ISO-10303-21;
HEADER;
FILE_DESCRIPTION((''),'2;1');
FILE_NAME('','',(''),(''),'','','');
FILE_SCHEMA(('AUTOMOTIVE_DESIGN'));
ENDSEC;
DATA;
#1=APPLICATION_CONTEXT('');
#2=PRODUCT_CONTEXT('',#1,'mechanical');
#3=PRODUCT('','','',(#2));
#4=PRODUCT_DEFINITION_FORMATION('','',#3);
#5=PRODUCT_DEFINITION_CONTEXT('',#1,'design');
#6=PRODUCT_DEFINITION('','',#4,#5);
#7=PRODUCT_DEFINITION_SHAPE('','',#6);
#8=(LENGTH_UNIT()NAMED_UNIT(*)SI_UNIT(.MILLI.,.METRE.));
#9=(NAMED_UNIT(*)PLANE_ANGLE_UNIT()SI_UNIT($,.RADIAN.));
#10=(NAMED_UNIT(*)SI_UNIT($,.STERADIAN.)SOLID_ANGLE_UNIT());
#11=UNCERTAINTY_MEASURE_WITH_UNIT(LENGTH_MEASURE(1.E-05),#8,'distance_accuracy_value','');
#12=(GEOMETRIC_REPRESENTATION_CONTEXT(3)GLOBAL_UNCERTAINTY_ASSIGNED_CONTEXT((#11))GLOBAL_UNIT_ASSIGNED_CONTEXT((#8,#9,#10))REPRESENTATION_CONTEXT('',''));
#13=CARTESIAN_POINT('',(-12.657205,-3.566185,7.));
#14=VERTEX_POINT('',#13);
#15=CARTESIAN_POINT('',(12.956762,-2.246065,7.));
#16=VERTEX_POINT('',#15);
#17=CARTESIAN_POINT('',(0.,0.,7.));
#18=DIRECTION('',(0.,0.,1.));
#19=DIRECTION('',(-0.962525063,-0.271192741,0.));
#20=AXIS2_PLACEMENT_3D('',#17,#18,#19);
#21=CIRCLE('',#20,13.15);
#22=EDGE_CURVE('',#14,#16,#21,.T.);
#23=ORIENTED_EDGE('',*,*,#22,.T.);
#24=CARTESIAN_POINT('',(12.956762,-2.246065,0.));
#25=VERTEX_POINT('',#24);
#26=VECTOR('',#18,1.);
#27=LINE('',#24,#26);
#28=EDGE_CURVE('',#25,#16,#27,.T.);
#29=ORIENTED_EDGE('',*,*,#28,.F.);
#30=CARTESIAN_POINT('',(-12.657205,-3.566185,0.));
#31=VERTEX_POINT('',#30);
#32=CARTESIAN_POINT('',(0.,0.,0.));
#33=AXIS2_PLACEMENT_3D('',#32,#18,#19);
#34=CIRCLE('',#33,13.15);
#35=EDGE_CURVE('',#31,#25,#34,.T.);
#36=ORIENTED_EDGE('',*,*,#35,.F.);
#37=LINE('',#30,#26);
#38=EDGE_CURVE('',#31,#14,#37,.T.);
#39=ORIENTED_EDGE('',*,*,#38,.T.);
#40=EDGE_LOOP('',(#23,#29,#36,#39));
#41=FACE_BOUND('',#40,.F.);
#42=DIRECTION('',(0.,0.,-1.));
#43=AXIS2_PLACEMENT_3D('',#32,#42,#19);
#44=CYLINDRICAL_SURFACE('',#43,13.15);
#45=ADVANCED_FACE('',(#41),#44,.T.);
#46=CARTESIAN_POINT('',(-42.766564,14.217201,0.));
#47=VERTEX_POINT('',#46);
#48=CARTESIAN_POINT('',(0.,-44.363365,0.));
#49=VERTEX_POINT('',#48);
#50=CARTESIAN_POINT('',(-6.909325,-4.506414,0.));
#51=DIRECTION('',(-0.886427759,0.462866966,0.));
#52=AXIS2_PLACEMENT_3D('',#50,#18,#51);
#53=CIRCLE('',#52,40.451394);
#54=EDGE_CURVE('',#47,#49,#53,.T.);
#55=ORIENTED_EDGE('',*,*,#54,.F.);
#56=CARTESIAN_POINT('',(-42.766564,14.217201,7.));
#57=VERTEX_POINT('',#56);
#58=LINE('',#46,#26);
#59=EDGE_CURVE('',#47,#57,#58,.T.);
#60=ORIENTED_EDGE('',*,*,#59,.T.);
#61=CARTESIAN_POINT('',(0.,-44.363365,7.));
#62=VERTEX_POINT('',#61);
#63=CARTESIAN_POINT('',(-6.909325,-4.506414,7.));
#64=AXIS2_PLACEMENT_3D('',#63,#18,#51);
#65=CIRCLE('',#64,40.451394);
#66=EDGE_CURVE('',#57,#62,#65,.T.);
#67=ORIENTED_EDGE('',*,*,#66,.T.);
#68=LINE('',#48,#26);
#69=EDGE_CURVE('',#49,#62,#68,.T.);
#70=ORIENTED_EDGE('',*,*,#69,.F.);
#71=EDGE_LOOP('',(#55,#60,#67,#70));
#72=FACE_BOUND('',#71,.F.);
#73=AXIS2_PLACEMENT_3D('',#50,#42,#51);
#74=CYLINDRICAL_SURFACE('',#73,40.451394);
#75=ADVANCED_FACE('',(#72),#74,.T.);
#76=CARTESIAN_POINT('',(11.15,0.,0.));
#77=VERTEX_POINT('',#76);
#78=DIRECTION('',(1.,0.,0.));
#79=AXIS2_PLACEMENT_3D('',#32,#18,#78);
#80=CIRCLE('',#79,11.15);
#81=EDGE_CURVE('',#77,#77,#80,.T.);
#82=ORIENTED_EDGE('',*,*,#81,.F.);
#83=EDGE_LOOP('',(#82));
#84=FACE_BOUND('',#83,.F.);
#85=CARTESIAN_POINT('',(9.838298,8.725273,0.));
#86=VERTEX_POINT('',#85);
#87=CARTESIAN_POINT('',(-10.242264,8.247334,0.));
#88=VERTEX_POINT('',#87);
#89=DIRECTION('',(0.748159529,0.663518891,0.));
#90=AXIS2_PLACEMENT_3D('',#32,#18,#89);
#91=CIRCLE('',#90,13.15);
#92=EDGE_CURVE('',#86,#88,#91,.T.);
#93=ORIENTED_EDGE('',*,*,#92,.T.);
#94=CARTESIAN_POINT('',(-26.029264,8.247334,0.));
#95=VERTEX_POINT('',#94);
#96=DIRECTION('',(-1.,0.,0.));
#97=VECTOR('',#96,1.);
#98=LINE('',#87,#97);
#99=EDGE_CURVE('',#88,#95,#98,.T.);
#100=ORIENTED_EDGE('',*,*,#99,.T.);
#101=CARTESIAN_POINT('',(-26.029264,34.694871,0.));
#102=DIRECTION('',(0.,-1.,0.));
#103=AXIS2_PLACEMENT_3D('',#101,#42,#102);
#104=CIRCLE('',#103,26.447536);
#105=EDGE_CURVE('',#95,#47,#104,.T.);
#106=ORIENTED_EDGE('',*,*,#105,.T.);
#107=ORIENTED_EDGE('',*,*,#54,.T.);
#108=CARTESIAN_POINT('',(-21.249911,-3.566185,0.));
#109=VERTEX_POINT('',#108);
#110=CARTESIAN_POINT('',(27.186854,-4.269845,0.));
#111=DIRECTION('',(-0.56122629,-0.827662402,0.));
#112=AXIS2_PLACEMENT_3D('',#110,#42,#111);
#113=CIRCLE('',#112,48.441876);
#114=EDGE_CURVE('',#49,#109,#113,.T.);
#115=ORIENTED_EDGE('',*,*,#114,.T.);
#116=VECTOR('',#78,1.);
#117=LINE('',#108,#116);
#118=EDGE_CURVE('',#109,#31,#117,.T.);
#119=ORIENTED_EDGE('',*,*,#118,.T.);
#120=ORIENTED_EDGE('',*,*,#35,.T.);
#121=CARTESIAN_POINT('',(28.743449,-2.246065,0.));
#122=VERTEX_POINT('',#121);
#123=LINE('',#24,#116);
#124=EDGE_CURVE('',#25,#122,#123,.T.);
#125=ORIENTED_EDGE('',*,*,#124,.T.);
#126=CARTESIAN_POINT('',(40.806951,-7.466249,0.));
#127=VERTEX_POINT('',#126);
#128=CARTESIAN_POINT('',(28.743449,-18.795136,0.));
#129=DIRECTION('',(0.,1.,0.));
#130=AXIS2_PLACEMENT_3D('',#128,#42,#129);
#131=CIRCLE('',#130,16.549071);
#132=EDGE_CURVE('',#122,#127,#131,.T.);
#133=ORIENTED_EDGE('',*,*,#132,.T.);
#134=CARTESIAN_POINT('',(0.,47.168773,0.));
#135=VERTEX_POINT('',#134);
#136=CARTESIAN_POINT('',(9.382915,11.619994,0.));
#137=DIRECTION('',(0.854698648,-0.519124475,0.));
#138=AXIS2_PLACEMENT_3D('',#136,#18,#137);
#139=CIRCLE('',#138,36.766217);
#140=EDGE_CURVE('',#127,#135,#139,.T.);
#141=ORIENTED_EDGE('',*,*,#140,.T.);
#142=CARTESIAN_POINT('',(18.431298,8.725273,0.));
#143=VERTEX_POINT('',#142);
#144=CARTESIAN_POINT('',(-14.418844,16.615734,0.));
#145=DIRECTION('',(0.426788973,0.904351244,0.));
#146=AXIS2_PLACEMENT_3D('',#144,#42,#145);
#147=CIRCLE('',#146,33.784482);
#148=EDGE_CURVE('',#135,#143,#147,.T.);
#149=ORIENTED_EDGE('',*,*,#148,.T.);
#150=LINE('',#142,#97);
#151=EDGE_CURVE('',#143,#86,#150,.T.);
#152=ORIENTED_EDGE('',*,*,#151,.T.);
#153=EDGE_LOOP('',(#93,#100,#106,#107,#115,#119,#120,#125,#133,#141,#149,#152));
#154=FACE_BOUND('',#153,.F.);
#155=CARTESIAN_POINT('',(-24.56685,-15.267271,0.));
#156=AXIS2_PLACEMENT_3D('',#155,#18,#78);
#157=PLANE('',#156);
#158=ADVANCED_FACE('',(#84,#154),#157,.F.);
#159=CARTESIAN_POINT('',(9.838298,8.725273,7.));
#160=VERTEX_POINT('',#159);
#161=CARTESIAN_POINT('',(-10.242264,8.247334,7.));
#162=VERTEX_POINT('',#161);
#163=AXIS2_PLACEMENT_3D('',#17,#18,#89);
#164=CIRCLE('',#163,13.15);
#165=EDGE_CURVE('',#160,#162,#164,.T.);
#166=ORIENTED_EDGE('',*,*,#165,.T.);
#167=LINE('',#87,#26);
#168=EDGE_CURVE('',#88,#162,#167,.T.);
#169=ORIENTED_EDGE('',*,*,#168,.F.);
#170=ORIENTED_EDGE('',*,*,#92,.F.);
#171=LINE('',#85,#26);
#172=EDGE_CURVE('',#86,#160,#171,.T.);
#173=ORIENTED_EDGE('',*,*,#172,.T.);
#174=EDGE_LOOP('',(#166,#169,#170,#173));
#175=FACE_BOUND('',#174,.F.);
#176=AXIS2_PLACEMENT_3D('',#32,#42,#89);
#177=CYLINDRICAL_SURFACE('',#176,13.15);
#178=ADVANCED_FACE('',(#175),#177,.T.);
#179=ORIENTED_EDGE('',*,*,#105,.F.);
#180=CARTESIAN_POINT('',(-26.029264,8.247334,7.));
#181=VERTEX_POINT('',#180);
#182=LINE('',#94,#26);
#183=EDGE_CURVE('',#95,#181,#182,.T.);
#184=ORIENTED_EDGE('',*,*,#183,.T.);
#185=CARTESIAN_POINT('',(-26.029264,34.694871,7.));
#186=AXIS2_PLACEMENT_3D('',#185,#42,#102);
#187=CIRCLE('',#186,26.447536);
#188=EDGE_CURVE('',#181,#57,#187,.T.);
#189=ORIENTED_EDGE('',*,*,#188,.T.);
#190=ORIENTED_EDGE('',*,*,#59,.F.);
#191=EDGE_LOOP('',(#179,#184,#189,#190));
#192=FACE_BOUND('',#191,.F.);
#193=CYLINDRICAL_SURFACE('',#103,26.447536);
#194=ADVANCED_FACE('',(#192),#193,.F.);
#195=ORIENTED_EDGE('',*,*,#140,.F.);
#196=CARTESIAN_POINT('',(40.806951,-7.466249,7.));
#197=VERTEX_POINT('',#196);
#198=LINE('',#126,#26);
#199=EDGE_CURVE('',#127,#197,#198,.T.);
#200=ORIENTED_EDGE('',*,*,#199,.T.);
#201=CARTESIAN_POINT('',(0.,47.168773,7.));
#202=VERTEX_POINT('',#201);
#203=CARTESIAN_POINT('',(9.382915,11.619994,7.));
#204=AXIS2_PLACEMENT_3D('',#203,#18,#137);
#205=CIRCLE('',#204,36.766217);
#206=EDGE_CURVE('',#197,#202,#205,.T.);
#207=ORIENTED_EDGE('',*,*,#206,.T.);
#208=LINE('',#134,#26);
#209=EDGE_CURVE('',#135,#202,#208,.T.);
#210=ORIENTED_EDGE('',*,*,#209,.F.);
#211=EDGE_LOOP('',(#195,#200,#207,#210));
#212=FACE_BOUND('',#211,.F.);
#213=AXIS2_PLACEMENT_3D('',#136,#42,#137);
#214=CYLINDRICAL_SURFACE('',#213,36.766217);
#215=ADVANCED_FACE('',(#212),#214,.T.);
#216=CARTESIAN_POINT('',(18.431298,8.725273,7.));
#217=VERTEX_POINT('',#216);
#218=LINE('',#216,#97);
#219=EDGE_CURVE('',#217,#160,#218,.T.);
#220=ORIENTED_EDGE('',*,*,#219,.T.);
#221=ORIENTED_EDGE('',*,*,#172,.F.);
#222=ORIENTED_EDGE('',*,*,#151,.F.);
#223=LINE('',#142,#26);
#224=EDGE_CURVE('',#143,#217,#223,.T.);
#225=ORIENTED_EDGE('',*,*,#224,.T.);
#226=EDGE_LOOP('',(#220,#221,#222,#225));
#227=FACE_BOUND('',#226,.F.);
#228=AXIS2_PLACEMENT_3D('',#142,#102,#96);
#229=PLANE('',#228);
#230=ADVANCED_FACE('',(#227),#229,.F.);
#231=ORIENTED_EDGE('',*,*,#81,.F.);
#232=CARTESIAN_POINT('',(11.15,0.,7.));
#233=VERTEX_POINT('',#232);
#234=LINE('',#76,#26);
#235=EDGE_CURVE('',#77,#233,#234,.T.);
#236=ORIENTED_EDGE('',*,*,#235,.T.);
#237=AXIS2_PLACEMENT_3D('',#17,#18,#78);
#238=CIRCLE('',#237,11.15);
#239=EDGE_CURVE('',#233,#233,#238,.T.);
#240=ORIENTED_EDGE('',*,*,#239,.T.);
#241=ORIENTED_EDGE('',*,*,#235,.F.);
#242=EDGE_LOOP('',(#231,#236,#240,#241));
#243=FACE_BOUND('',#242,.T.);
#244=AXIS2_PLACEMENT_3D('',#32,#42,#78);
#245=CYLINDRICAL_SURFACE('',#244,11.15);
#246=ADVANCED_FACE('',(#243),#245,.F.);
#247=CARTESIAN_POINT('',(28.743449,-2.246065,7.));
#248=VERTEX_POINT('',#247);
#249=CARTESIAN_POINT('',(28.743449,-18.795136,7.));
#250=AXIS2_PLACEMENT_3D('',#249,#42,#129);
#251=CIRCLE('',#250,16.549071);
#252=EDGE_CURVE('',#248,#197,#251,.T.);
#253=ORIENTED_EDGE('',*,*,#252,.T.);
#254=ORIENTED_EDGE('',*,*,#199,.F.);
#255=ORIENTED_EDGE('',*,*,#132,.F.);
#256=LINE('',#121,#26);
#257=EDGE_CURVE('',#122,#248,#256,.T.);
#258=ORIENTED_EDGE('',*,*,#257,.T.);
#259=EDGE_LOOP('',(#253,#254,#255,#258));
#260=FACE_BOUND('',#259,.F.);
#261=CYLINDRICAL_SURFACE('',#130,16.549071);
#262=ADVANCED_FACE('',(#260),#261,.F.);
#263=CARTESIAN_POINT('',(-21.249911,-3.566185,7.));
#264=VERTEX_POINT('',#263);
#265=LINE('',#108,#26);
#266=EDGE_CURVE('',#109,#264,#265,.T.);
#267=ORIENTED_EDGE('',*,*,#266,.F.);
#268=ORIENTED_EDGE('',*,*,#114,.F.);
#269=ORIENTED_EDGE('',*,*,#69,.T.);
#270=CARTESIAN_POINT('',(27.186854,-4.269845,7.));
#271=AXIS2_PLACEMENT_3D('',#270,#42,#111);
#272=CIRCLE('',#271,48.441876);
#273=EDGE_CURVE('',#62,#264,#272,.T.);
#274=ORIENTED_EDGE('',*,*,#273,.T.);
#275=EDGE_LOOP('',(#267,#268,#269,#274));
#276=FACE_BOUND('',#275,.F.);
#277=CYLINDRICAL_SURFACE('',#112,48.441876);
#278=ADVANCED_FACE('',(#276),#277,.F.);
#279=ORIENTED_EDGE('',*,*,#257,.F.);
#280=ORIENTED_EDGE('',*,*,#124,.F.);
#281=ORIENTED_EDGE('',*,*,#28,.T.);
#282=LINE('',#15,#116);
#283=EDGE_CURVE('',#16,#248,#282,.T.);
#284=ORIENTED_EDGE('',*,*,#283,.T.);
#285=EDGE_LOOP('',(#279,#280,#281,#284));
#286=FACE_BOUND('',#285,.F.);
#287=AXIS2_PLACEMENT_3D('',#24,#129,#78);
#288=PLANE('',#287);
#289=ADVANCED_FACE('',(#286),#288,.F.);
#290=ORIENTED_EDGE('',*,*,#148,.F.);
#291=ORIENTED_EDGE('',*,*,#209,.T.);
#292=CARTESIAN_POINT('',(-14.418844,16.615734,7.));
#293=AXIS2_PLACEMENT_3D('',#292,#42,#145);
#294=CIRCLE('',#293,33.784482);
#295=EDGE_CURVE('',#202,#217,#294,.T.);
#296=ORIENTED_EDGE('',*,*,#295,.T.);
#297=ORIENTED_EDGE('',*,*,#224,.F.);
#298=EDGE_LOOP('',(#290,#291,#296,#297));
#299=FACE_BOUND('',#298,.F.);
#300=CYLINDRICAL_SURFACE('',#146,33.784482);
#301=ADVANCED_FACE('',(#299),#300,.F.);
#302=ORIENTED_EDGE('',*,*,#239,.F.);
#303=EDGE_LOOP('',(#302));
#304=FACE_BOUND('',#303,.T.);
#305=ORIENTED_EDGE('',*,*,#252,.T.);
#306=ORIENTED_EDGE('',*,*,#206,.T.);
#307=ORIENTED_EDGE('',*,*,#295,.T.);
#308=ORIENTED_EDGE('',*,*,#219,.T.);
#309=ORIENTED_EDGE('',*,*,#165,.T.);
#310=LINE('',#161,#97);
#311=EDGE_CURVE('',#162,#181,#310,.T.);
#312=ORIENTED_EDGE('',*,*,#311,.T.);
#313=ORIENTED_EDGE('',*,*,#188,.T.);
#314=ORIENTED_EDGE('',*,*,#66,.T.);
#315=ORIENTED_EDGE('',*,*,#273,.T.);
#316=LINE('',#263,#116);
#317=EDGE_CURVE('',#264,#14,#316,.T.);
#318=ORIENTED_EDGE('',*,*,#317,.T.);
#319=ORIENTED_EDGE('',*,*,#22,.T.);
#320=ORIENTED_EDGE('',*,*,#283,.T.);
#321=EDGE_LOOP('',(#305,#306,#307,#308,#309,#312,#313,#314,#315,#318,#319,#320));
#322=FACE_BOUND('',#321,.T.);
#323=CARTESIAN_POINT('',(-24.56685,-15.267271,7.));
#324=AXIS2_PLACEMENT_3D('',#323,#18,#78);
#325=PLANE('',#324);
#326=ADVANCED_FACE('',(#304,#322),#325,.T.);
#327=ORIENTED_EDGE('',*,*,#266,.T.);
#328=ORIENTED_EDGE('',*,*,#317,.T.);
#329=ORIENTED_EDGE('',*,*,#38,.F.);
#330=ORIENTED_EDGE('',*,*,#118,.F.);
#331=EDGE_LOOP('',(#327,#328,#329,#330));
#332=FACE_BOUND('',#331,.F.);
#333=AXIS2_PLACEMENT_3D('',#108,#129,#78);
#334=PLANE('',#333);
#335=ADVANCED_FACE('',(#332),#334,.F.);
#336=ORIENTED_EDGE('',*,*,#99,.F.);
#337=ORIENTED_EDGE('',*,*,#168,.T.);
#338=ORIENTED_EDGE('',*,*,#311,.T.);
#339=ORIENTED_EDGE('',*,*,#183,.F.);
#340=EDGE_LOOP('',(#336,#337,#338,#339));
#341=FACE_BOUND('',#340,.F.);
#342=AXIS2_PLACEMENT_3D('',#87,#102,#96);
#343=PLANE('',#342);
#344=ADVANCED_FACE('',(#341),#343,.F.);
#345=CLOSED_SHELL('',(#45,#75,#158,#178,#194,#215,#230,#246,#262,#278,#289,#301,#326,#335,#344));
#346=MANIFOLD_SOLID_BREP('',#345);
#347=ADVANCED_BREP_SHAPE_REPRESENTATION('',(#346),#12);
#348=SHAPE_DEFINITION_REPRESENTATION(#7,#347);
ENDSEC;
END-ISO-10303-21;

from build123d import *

# Parameters (mm, degrees)
F0_R     = 11.15
F1_DEPTH = 7


# Not quite as in the source:
# - a feature names something its author has since deleted; it is built from what else it names


with BuildPart() as f1:
    # F0 (on Top) → F1 (new body)
    with BuildSketch(Plane.XY):
        with BuildLine():
            ThreePointArc((-12.6572045799, -3.5661845468), (-12.883564121, 2.6336809867), (-10.2422641065, 8.2473344769))
            Line((-10.2422641065, 8.2473344769), (-26.0292641065, 8.2473344769))
            ThreePointArc((-26.0292641065, 8.2473344769), (-34.9143148349, 9.7844703454), (-42.7665638646, 14.217200689))
            ThreePointArc((-42.7665638646, 14.217200689), (-39.5806592619, -28.3580220296), (0, -44.3633645773))
            ThreePointArc((0, -44.3633645773), (-15.7763325785, -26.6479576979), (-21.2499108166, -3.5661845468))
            Line((-21.2499108166, -3.5661845468), (-12.6572045799, -3.5661845468))
        make_face()
        with BuildLine():
            ThreePointArc((12.9567624843, -2.2460645415), (13.1016015561, -1.1271808486), (13.15, 0))
            ThreePointArc((13.15, 0), (12.2942286487, 4.6663092411), (9.8382978048, 8.7252734229))
            ThreePointArc((9.8382978048, 8.7252734229), (-0.3128955133, 13.1462769025), (-10.2422641065, 8.2473344769))
            ThreePointArc((-10.2422641065, 8.2473344769), (-12.883564121, 2.6336809867), (-12.6572045799, -3.5661845468))
            ThreePointArc((-12.6572045799, -3.5661845468), (0.6768404107, -13.1325697051), (12.9567624843, -2.2460645415))
        make_face()
        Circle(F0_R, mode=Mode.SUBTRACT)
        with BuildLine():
            ThreePointArc((9.8382978048, 8.7252734229), (12.2942286487, 4.6663092411), (13.15, 0))
            ThreePointArc((13.15, 0), (13.1016015561, -1.1271808486), (12.9567624843, -2.2460645415))
            Line((12.9567624843, -2.2460645415), (28.7434491243, -2.2460645415))
            ThreePointArc((28.7434491243, -2.2460645415), (35.3157092291, -3.6070761232), (40.8069513167, -7.4662490586))
            ThreePointArc((40.8069513167, -7.4662490586), (38.839648653, 33.6212574976), (0, 47.1687726676))
            ThreePointArc((0, 47.1687726676), (16.0453137764, 31.2214280727), (18.4312978048, 8.7252734229))
            Line((18.4312978048, 8.7252734229), (9.8382978048, 8.7252734229))
        make_face()
    extrude(amount=F1_DEPTH)


solid = f1.part
